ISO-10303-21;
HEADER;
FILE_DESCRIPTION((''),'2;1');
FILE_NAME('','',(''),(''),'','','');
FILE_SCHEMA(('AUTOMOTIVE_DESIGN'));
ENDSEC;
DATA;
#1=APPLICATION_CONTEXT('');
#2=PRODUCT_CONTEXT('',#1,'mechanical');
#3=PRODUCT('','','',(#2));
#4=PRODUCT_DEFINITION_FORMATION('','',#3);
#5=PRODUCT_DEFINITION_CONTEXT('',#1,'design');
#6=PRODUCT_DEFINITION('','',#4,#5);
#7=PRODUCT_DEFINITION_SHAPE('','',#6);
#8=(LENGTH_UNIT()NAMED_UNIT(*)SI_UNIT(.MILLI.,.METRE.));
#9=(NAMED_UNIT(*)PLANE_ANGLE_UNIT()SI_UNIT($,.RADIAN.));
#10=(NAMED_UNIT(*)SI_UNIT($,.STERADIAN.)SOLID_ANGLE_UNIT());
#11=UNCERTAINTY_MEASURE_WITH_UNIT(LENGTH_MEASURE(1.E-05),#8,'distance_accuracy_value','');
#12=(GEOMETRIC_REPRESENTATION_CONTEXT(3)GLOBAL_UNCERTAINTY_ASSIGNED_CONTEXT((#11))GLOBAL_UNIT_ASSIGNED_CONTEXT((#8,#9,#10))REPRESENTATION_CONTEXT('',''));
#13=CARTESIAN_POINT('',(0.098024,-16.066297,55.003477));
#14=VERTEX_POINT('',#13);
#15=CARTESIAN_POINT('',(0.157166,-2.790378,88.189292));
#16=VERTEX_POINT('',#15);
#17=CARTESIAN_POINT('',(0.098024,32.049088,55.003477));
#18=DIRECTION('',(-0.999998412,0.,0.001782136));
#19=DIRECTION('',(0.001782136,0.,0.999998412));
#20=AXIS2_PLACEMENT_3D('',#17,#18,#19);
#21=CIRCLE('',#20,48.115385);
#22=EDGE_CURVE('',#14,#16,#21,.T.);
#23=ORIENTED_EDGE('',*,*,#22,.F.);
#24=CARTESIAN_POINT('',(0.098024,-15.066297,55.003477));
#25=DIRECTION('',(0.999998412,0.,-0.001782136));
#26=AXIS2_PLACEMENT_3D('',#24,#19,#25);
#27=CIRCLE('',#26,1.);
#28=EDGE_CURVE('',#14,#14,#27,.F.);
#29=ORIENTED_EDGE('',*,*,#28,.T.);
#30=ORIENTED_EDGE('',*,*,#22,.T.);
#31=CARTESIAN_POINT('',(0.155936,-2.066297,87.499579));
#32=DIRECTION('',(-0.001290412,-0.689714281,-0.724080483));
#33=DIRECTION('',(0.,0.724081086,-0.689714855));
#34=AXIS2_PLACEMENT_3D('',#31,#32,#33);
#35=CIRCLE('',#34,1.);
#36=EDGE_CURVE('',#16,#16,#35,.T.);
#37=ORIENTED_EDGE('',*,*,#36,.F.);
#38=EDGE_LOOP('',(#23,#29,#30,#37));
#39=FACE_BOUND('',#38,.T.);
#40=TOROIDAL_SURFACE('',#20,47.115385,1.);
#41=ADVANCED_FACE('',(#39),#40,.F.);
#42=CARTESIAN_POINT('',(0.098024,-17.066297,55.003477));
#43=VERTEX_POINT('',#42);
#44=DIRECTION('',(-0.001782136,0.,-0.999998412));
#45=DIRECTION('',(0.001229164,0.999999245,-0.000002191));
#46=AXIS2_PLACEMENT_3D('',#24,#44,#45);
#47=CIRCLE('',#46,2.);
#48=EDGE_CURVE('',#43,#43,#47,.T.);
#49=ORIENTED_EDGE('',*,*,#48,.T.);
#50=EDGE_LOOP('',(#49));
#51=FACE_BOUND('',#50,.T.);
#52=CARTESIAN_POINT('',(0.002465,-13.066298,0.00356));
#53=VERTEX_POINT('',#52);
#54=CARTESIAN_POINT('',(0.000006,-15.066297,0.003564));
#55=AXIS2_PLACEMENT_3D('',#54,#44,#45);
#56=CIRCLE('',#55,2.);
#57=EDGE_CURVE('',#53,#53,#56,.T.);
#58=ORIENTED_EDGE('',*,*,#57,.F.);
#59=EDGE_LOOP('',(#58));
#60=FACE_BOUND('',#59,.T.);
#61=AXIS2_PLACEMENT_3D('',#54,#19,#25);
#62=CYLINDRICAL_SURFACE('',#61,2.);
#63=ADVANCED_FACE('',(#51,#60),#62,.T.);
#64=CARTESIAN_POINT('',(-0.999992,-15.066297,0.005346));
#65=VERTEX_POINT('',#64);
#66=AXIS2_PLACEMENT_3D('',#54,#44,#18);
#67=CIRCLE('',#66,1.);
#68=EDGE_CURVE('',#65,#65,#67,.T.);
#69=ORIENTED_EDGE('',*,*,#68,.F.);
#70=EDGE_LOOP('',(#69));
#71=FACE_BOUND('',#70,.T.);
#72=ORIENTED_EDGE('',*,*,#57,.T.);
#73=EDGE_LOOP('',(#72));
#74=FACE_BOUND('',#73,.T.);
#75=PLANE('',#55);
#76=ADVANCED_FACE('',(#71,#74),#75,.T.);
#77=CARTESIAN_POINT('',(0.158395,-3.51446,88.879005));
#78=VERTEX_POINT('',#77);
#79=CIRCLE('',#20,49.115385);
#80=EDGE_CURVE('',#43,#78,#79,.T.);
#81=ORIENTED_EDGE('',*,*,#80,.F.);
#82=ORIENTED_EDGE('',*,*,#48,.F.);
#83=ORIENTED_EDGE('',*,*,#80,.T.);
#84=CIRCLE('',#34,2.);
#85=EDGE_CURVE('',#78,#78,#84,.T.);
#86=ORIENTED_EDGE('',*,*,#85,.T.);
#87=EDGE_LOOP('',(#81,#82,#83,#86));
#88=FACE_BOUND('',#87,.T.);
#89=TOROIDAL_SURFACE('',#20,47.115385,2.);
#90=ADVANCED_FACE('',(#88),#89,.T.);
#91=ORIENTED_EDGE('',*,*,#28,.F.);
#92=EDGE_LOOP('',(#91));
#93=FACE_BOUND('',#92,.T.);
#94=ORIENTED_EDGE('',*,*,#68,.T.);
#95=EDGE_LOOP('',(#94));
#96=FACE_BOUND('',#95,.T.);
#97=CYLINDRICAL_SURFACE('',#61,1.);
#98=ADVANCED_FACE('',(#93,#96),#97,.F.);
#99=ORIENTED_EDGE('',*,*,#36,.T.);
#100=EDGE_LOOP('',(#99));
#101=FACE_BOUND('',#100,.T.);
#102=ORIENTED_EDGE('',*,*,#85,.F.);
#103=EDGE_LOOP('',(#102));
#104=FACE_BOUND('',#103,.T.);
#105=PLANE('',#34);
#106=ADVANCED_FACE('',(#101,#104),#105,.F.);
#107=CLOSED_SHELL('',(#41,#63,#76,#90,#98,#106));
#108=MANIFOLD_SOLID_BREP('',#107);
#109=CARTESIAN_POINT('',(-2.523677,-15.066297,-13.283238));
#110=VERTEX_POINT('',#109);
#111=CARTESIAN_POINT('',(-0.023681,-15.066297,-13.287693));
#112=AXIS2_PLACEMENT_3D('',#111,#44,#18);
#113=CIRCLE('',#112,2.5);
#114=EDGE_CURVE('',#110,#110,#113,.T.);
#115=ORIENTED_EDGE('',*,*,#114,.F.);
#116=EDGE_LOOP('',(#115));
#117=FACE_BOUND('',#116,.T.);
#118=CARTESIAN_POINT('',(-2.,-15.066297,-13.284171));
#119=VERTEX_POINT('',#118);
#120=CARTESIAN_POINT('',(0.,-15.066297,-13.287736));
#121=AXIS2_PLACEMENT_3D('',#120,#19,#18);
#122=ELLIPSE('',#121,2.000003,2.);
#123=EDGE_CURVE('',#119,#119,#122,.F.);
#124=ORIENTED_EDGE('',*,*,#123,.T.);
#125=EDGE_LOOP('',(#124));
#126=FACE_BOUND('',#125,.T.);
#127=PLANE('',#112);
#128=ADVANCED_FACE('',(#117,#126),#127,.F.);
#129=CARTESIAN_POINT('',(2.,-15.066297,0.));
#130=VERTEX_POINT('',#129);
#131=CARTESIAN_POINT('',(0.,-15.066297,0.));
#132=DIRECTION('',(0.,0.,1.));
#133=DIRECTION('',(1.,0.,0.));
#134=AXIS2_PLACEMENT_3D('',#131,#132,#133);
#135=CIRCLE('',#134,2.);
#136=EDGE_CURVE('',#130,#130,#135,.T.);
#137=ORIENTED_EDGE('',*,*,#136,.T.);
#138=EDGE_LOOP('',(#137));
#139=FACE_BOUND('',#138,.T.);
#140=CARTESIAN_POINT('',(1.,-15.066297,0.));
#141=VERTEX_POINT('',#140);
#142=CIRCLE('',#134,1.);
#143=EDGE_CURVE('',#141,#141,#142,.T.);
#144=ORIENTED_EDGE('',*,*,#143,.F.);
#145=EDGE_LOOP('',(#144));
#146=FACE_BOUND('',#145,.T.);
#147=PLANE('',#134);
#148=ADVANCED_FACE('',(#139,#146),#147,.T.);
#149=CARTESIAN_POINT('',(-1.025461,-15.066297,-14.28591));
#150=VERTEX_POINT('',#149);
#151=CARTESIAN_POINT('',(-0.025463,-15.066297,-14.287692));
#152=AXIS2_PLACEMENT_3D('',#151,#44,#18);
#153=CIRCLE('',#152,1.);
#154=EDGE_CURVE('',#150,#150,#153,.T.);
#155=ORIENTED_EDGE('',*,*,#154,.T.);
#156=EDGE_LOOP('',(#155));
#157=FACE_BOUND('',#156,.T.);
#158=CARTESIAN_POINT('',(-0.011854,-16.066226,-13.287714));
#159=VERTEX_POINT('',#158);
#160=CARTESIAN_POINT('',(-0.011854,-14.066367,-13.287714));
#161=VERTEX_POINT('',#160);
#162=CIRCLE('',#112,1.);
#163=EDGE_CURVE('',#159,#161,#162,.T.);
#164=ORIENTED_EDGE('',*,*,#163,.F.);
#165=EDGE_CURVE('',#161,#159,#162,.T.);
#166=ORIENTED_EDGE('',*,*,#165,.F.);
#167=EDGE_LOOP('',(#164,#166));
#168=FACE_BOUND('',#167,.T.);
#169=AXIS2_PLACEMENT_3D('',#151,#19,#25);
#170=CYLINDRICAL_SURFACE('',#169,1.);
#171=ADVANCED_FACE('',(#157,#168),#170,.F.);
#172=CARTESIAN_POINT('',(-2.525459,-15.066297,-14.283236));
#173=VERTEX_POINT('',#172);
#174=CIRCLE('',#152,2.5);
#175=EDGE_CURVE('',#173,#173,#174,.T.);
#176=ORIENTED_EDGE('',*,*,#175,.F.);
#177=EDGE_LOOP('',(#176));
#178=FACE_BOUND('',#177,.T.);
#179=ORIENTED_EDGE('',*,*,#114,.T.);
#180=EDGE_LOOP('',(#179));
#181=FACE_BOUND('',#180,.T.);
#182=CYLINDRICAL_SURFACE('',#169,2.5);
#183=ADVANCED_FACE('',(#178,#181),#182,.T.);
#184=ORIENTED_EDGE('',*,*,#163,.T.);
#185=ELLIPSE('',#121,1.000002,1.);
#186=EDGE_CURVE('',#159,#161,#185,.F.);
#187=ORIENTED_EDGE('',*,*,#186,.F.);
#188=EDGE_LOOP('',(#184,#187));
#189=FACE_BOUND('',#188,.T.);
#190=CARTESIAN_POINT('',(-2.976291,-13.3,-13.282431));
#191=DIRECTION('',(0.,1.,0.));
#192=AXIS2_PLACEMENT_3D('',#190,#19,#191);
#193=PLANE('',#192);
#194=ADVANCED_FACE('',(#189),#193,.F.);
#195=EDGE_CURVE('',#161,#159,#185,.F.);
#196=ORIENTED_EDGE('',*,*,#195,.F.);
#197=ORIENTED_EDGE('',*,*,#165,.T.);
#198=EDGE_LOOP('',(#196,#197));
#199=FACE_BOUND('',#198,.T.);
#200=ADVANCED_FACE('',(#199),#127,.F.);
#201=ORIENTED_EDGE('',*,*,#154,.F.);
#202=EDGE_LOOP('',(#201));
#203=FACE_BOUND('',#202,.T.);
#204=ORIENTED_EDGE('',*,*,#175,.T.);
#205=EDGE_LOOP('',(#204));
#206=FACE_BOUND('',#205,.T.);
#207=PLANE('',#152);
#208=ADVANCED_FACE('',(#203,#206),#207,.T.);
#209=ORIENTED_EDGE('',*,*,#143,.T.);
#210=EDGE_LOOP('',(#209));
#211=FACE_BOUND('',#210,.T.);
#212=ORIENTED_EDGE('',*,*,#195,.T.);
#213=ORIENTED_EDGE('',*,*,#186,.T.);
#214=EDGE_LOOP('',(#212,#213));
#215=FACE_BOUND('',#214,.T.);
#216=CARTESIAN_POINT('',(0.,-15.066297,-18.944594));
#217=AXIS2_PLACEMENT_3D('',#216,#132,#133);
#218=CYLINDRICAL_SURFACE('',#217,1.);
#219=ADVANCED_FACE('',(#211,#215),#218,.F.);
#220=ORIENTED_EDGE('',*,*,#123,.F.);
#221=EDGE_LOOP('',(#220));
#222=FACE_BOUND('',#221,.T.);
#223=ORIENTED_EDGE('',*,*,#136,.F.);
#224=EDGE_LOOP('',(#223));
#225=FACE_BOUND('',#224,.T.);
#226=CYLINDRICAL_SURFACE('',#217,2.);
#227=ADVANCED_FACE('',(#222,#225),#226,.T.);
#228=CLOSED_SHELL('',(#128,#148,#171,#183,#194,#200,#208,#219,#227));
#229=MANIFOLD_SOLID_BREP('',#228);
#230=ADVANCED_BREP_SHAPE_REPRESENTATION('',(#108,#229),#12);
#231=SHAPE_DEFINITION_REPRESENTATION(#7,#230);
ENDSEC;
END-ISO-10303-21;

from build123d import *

# Parameters (mm, degrees)
EXTRUDE_START         = -13.29129993
EXTRUDE_1_OUTLINE_R   = 2
EXTRUDE_1_OUTLINE_R_2 = 1
EXTRUDE_1_DEPTH       = 13.29129993
EXTRUDE_START_2       = -14
EXTRUDE_1_2_OUTLINE_W = 7
EXTRUDE_1_2_OUTLINE_H = 7
EXTRUDE_1_2_DEPTH     = 0.712285549
SWEEP_1_PROFILE_R     = 2
SWEEP_1_PROFILE_R_2   = 1
SKETCH_48_R           = 2.5
SKETCH_48_R_2         = 0.99999967
EXTRUDE_2_DEPTH       = 1


with BuildPart() as part:
    # 填料-伸長1: read off the stored shape, not the designer's step
    # 填料-伸長1 outline → 填料-伸長1 (new body)
    with BuildSketch(Plane.XY.offset(EXTRUDE_START)):
        with Locations((0, -15.066296733)):
            Circle(EXTRUDE_1_OUTLINE_R)
        with Locations((0, -15.066296733)):
            Circle(EXTRUDE_1_OUTLINE_R_2, mode=Mode.SUBTRACT)
    extrude(amount=EXTRUDE_1_DEPTH)

    # Extrude 1 2 outline → Extrude 1 2 (cut)
    with BuildSketch(Plane(origin=(0, 0, 0), x_dir=(0.9999984119942068, 0, -0.0017821360960043895), z_dir=(0.0017821360960043895, 0, 0.9999984119942068)).offset(EXTRUDE_START_2)):
        with Locations((0.5, -15.5)):
            Rectangle(EXTRUDE_1_2_OUTLINE_W, EXTRUDE_1_2_OUTLINE_H)
    extrude(amount=EXTRUDE_1_2_DEPTH, mode=Mode.SUBTRACT)

    # 草圖48 → 填料-伸長2 (add)
    with BuildSketch(Plane(origin=(-0.023680516, 0, -13.28769335), x_dir=(-0.9999984119942069, 0, 0.001782136096004392), z_dir=(-0.001782136096004392, 0, -0.9999984119942069))):
        with Locations((0, -15.066296733)):
            Circle(SKETCH_48_R)
        with Locations(Location((0, -15.066296733, 0), (0, 0, 270))):
            Circle(SKETCH_48_R_2, mode=Mode.SUBTRACT)
    extrude(amount=EXTRUDE_2_DEPTH)


with BuildPart() as body_2:
    # 掃出-薄件1: sweep along a path in 草圖2
    with BuildLine(Plane(origin=(0, 0, 0), x_dir=(0.001782136096004214, 0, 0.9999984119942069), z_dir=(-0.9999984119942069, 0, 0.001782136096004214))) as sweep_1_path:
        Line((0.003564272, -15.066296733), (55.003564272, -15.066296733))
        ThreePointArc((55.003564272, -15.066296733), (72.503564272, -11.695734296), (87.499717891, -2.066296733))
    # 掃出-薄件1 profile (on start of the path) → 掃出-薄件1 (sweep)
    with BuildSketch(Plane(origin=(6.352e-06, -15.066296733, 0.003564267), x_dir=(0.9999984119942069, 0, -0.001782136096004214), z_dir=(0.001782136096004214, 0, 0.9999984119942069))):
        Circle(SWEEP_1_PROFILE_R)
        Circle(SWEEP_1_PROFILE_R_2, mode=Mode.SUBTRACT)
    sweep(path=sweep_1_path.line)


solid = Compound([part.part, body_2.part])
